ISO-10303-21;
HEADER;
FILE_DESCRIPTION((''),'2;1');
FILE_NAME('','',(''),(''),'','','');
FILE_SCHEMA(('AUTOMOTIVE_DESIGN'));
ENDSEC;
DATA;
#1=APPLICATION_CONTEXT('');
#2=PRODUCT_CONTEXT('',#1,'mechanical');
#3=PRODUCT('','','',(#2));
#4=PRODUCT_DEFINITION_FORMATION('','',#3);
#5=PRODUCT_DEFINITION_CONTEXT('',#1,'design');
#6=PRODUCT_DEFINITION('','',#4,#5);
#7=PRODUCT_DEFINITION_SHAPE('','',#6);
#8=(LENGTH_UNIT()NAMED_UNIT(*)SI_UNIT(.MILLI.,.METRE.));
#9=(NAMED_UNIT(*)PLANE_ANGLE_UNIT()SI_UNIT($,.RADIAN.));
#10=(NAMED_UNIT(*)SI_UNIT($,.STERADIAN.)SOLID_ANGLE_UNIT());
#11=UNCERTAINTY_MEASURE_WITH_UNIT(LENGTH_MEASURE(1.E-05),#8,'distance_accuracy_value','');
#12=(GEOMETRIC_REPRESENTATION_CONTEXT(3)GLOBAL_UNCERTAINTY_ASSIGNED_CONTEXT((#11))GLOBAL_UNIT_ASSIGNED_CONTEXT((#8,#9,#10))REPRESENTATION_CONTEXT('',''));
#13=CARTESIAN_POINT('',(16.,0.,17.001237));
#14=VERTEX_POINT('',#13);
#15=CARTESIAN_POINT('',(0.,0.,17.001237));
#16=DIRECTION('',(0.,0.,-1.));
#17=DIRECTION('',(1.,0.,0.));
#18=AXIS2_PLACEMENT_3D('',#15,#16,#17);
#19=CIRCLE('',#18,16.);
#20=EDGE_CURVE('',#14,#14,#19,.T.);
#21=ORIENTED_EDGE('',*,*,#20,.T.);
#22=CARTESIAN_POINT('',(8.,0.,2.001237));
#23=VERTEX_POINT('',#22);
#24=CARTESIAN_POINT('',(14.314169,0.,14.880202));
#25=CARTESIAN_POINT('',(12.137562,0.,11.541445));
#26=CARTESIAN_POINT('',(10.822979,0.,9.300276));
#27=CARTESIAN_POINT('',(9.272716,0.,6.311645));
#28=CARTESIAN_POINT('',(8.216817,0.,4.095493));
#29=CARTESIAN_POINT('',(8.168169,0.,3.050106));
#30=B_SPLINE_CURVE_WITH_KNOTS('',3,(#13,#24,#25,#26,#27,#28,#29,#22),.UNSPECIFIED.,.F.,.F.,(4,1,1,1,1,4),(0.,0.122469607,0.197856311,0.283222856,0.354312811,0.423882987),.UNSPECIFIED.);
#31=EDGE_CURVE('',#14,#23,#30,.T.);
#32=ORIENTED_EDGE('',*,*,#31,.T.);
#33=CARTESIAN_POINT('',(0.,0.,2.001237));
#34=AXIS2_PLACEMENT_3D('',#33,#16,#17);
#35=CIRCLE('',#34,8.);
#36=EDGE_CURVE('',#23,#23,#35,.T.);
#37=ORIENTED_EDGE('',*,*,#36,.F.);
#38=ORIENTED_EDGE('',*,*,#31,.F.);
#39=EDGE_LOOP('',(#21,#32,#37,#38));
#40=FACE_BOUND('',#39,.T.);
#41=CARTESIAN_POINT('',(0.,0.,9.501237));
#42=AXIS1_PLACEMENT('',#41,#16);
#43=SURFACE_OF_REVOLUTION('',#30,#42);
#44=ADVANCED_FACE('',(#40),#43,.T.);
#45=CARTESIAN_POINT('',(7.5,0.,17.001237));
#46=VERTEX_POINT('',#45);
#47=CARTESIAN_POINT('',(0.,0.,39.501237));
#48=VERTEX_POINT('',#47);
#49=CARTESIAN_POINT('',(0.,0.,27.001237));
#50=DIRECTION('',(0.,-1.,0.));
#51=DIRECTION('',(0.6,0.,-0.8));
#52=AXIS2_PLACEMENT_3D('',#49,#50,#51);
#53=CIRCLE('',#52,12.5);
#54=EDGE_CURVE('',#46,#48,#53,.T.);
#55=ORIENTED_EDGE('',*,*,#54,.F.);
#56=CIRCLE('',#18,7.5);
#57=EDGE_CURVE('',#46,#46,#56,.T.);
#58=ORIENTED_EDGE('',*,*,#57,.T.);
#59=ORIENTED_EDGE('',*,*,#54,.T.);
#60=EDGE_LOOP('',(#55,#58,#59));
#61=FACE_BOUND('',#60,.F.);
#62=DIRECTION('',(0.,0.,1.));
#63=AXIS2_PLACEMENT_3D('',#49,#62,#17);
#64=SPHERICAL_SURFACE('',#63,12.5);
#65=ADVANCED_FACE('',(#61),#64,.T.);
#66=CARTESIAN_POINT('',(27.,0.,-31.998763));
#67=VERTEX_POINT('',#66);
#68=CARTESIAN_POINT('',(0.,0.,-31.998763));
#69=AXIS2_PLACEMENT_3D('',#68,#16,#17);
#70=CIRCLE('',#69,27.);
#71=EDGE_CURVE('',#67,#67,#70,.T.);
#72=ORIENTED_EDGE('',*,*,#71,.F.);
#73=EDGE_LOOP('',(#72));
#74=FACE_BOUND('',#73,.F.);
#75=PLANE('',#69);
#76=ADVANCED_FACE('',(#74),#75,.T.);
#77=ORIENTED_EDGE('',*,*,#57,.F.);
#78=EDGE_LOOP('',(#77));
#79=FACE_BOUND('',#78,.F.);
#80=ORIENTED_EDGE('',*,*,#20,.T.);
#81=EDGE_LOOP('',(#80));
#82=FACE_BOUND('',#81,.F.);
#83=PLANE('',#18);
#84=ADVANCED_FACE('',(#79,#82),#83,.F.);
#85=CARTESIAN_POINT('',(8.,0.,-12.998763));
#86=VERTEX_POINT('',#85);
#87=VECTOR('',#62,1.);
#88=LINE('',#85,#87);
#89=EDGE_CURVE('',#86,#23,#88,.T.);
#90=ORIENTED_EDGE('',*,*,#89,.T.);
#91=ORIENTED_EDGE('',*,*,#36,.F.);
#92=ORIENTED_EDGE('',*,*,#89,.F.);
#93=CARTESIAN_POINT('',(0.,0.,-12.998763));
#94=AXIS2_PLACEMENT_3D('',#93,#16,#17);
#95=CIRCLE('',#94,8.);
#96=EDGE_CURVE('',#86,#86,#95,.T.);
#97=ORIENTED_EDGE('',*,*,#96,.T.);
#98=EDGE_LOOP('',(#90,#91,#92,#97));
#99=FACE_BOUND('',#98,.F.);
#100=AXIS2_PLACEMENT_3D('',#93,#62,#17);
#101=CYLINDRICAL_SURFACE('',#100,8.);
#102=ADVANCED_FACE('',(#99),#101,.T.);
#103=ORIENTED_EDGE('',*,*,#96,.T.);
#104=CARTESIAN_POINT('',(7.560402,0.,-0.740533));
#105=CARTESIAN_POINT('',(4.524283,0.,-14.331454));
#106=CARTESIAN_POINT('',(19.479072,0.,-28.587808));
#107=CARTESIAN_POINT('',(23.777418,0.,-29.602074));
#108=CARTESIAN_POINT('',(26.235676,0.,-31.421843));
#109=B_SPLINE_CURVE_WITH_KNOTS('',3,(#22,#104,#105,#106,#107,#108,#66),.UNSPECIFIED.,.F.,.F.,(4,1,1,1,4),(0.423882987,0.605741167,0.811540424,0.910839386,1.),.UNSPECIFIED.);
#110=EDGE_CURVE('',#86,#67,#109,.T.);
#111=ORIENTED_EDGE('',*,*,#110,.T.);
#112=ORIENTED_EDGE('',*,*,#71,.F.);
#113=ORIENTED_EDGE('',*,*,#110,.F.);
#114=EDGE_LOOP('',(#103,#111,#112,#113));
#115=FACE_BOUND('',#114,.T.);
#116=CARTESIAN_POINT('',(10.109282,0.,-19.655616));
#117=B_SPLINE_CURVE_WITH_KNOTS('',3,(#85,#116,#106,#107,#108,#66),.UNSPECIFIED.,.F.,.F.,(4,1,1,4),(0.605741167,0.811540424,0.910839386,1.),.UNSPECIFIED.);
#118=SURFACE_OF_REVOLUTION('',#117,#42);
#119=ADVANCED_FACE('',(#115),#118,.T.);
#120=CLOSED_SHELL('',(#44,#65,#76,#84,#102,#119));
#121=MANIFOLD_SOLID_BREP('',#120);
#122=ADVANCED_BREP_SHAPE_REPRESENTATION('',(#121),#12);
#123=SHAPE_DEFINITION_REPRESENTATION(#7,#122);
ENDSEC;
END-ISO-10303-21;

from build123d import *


with BuildPart() as f1:
    # F0 (on Front) → F1 (revolve)
    with BuildSketch(Plane.XZ):
        with BuildLine():
            Line((16, 17.0012365282), (7.5, 17.0012365282))
            ThreePointArc((7.5, 17.0012365282), (11.8585412256, 30.9540836034), (0, 39.5012365282))
            Line((0, 39.5012365282), (0, 27.0012365282))
            Line((0, 27.0012365282), (0, 17.0012365282))
            Line((0, 17.0012365282), (0, 2.0012365282))
            Line((0, 2.0012365282), (0, -12.9987634718))
            Line((0, -12.9987634718), (0, -27.9987634718))
            Line((0, -27.9987634718), (0, -29.9987634718))
            Line((0, -29.9987634718), (0, -31.9987634718))
            Line((0, -31.9987634718), (27, -31.9987634718))
            add(Edge.make_bspline(
                [(8, -12.9987634718), (10.1092817881, -19.655615647), (19.4790722356, -28.5878077637), (23.7774183733, -29.6020737173), (26.2356764407, -31.4218427093), (27, -31.9987634718)],
                knots=[0.6057411671, 0.6057411671, 0.6057411671, 0.6057411671, 0.8115404241, 0.9108393863, 1, 1, 1, 1], degree=3))
            add(Edge.make_bspline(
                [(8, 2.0012365282), (7.5604020354, -0.7405333825), (6.1360955685, -7.1163174472), (8, -12.9987634718)],
                knots=[0.4238829871, 0.4238829871, 0.4238829871, 0.4238829871, 0.6057411671, 0.6057411671, 0.6057411671, 0.6057411671], degree=3))
            add(Edge.make_bspline(
                [(16, 17.0012365282), (14.3141693383, 14.8802017595), (12.1375620782, 11.541444808), (10.8229786228, 9.300275817), (9.2727160233, 6.3116447724), (8.2168165295, 4.0954926116), (8.1681689979, 3.0501055757), (8, 2.0012365282)],
                knots=[0, 0, 0, 0, 0.1224696071, 0.1978563108, 0.283222856, 0.3543128108, 0.4238829871, 0.4238829871, 0.4238829871, 0.4238829871], degree=3))
        make_face()
        with BuildLine():
            Line((8, -12.9987634718), (8, 2.0012365282))
            add(Edge.make_bspline(
                [(8, 2.0012365282), (7.5604020354, -0.7405333825), (6.1360955685, -7.1163174472), (8, -12.9987634718)],
                knots=[0.4238829871, 0.4238829871, 0.4238829871, 0.4238829871, 0.6057411671, 0.6057411671, 0.6057411671, 0.6057411671], degree=3))
        make_face()
    revolve(axis=Axis((0, 0, 9.5012365282), (0, 0, -1)))


solid = f1.part
